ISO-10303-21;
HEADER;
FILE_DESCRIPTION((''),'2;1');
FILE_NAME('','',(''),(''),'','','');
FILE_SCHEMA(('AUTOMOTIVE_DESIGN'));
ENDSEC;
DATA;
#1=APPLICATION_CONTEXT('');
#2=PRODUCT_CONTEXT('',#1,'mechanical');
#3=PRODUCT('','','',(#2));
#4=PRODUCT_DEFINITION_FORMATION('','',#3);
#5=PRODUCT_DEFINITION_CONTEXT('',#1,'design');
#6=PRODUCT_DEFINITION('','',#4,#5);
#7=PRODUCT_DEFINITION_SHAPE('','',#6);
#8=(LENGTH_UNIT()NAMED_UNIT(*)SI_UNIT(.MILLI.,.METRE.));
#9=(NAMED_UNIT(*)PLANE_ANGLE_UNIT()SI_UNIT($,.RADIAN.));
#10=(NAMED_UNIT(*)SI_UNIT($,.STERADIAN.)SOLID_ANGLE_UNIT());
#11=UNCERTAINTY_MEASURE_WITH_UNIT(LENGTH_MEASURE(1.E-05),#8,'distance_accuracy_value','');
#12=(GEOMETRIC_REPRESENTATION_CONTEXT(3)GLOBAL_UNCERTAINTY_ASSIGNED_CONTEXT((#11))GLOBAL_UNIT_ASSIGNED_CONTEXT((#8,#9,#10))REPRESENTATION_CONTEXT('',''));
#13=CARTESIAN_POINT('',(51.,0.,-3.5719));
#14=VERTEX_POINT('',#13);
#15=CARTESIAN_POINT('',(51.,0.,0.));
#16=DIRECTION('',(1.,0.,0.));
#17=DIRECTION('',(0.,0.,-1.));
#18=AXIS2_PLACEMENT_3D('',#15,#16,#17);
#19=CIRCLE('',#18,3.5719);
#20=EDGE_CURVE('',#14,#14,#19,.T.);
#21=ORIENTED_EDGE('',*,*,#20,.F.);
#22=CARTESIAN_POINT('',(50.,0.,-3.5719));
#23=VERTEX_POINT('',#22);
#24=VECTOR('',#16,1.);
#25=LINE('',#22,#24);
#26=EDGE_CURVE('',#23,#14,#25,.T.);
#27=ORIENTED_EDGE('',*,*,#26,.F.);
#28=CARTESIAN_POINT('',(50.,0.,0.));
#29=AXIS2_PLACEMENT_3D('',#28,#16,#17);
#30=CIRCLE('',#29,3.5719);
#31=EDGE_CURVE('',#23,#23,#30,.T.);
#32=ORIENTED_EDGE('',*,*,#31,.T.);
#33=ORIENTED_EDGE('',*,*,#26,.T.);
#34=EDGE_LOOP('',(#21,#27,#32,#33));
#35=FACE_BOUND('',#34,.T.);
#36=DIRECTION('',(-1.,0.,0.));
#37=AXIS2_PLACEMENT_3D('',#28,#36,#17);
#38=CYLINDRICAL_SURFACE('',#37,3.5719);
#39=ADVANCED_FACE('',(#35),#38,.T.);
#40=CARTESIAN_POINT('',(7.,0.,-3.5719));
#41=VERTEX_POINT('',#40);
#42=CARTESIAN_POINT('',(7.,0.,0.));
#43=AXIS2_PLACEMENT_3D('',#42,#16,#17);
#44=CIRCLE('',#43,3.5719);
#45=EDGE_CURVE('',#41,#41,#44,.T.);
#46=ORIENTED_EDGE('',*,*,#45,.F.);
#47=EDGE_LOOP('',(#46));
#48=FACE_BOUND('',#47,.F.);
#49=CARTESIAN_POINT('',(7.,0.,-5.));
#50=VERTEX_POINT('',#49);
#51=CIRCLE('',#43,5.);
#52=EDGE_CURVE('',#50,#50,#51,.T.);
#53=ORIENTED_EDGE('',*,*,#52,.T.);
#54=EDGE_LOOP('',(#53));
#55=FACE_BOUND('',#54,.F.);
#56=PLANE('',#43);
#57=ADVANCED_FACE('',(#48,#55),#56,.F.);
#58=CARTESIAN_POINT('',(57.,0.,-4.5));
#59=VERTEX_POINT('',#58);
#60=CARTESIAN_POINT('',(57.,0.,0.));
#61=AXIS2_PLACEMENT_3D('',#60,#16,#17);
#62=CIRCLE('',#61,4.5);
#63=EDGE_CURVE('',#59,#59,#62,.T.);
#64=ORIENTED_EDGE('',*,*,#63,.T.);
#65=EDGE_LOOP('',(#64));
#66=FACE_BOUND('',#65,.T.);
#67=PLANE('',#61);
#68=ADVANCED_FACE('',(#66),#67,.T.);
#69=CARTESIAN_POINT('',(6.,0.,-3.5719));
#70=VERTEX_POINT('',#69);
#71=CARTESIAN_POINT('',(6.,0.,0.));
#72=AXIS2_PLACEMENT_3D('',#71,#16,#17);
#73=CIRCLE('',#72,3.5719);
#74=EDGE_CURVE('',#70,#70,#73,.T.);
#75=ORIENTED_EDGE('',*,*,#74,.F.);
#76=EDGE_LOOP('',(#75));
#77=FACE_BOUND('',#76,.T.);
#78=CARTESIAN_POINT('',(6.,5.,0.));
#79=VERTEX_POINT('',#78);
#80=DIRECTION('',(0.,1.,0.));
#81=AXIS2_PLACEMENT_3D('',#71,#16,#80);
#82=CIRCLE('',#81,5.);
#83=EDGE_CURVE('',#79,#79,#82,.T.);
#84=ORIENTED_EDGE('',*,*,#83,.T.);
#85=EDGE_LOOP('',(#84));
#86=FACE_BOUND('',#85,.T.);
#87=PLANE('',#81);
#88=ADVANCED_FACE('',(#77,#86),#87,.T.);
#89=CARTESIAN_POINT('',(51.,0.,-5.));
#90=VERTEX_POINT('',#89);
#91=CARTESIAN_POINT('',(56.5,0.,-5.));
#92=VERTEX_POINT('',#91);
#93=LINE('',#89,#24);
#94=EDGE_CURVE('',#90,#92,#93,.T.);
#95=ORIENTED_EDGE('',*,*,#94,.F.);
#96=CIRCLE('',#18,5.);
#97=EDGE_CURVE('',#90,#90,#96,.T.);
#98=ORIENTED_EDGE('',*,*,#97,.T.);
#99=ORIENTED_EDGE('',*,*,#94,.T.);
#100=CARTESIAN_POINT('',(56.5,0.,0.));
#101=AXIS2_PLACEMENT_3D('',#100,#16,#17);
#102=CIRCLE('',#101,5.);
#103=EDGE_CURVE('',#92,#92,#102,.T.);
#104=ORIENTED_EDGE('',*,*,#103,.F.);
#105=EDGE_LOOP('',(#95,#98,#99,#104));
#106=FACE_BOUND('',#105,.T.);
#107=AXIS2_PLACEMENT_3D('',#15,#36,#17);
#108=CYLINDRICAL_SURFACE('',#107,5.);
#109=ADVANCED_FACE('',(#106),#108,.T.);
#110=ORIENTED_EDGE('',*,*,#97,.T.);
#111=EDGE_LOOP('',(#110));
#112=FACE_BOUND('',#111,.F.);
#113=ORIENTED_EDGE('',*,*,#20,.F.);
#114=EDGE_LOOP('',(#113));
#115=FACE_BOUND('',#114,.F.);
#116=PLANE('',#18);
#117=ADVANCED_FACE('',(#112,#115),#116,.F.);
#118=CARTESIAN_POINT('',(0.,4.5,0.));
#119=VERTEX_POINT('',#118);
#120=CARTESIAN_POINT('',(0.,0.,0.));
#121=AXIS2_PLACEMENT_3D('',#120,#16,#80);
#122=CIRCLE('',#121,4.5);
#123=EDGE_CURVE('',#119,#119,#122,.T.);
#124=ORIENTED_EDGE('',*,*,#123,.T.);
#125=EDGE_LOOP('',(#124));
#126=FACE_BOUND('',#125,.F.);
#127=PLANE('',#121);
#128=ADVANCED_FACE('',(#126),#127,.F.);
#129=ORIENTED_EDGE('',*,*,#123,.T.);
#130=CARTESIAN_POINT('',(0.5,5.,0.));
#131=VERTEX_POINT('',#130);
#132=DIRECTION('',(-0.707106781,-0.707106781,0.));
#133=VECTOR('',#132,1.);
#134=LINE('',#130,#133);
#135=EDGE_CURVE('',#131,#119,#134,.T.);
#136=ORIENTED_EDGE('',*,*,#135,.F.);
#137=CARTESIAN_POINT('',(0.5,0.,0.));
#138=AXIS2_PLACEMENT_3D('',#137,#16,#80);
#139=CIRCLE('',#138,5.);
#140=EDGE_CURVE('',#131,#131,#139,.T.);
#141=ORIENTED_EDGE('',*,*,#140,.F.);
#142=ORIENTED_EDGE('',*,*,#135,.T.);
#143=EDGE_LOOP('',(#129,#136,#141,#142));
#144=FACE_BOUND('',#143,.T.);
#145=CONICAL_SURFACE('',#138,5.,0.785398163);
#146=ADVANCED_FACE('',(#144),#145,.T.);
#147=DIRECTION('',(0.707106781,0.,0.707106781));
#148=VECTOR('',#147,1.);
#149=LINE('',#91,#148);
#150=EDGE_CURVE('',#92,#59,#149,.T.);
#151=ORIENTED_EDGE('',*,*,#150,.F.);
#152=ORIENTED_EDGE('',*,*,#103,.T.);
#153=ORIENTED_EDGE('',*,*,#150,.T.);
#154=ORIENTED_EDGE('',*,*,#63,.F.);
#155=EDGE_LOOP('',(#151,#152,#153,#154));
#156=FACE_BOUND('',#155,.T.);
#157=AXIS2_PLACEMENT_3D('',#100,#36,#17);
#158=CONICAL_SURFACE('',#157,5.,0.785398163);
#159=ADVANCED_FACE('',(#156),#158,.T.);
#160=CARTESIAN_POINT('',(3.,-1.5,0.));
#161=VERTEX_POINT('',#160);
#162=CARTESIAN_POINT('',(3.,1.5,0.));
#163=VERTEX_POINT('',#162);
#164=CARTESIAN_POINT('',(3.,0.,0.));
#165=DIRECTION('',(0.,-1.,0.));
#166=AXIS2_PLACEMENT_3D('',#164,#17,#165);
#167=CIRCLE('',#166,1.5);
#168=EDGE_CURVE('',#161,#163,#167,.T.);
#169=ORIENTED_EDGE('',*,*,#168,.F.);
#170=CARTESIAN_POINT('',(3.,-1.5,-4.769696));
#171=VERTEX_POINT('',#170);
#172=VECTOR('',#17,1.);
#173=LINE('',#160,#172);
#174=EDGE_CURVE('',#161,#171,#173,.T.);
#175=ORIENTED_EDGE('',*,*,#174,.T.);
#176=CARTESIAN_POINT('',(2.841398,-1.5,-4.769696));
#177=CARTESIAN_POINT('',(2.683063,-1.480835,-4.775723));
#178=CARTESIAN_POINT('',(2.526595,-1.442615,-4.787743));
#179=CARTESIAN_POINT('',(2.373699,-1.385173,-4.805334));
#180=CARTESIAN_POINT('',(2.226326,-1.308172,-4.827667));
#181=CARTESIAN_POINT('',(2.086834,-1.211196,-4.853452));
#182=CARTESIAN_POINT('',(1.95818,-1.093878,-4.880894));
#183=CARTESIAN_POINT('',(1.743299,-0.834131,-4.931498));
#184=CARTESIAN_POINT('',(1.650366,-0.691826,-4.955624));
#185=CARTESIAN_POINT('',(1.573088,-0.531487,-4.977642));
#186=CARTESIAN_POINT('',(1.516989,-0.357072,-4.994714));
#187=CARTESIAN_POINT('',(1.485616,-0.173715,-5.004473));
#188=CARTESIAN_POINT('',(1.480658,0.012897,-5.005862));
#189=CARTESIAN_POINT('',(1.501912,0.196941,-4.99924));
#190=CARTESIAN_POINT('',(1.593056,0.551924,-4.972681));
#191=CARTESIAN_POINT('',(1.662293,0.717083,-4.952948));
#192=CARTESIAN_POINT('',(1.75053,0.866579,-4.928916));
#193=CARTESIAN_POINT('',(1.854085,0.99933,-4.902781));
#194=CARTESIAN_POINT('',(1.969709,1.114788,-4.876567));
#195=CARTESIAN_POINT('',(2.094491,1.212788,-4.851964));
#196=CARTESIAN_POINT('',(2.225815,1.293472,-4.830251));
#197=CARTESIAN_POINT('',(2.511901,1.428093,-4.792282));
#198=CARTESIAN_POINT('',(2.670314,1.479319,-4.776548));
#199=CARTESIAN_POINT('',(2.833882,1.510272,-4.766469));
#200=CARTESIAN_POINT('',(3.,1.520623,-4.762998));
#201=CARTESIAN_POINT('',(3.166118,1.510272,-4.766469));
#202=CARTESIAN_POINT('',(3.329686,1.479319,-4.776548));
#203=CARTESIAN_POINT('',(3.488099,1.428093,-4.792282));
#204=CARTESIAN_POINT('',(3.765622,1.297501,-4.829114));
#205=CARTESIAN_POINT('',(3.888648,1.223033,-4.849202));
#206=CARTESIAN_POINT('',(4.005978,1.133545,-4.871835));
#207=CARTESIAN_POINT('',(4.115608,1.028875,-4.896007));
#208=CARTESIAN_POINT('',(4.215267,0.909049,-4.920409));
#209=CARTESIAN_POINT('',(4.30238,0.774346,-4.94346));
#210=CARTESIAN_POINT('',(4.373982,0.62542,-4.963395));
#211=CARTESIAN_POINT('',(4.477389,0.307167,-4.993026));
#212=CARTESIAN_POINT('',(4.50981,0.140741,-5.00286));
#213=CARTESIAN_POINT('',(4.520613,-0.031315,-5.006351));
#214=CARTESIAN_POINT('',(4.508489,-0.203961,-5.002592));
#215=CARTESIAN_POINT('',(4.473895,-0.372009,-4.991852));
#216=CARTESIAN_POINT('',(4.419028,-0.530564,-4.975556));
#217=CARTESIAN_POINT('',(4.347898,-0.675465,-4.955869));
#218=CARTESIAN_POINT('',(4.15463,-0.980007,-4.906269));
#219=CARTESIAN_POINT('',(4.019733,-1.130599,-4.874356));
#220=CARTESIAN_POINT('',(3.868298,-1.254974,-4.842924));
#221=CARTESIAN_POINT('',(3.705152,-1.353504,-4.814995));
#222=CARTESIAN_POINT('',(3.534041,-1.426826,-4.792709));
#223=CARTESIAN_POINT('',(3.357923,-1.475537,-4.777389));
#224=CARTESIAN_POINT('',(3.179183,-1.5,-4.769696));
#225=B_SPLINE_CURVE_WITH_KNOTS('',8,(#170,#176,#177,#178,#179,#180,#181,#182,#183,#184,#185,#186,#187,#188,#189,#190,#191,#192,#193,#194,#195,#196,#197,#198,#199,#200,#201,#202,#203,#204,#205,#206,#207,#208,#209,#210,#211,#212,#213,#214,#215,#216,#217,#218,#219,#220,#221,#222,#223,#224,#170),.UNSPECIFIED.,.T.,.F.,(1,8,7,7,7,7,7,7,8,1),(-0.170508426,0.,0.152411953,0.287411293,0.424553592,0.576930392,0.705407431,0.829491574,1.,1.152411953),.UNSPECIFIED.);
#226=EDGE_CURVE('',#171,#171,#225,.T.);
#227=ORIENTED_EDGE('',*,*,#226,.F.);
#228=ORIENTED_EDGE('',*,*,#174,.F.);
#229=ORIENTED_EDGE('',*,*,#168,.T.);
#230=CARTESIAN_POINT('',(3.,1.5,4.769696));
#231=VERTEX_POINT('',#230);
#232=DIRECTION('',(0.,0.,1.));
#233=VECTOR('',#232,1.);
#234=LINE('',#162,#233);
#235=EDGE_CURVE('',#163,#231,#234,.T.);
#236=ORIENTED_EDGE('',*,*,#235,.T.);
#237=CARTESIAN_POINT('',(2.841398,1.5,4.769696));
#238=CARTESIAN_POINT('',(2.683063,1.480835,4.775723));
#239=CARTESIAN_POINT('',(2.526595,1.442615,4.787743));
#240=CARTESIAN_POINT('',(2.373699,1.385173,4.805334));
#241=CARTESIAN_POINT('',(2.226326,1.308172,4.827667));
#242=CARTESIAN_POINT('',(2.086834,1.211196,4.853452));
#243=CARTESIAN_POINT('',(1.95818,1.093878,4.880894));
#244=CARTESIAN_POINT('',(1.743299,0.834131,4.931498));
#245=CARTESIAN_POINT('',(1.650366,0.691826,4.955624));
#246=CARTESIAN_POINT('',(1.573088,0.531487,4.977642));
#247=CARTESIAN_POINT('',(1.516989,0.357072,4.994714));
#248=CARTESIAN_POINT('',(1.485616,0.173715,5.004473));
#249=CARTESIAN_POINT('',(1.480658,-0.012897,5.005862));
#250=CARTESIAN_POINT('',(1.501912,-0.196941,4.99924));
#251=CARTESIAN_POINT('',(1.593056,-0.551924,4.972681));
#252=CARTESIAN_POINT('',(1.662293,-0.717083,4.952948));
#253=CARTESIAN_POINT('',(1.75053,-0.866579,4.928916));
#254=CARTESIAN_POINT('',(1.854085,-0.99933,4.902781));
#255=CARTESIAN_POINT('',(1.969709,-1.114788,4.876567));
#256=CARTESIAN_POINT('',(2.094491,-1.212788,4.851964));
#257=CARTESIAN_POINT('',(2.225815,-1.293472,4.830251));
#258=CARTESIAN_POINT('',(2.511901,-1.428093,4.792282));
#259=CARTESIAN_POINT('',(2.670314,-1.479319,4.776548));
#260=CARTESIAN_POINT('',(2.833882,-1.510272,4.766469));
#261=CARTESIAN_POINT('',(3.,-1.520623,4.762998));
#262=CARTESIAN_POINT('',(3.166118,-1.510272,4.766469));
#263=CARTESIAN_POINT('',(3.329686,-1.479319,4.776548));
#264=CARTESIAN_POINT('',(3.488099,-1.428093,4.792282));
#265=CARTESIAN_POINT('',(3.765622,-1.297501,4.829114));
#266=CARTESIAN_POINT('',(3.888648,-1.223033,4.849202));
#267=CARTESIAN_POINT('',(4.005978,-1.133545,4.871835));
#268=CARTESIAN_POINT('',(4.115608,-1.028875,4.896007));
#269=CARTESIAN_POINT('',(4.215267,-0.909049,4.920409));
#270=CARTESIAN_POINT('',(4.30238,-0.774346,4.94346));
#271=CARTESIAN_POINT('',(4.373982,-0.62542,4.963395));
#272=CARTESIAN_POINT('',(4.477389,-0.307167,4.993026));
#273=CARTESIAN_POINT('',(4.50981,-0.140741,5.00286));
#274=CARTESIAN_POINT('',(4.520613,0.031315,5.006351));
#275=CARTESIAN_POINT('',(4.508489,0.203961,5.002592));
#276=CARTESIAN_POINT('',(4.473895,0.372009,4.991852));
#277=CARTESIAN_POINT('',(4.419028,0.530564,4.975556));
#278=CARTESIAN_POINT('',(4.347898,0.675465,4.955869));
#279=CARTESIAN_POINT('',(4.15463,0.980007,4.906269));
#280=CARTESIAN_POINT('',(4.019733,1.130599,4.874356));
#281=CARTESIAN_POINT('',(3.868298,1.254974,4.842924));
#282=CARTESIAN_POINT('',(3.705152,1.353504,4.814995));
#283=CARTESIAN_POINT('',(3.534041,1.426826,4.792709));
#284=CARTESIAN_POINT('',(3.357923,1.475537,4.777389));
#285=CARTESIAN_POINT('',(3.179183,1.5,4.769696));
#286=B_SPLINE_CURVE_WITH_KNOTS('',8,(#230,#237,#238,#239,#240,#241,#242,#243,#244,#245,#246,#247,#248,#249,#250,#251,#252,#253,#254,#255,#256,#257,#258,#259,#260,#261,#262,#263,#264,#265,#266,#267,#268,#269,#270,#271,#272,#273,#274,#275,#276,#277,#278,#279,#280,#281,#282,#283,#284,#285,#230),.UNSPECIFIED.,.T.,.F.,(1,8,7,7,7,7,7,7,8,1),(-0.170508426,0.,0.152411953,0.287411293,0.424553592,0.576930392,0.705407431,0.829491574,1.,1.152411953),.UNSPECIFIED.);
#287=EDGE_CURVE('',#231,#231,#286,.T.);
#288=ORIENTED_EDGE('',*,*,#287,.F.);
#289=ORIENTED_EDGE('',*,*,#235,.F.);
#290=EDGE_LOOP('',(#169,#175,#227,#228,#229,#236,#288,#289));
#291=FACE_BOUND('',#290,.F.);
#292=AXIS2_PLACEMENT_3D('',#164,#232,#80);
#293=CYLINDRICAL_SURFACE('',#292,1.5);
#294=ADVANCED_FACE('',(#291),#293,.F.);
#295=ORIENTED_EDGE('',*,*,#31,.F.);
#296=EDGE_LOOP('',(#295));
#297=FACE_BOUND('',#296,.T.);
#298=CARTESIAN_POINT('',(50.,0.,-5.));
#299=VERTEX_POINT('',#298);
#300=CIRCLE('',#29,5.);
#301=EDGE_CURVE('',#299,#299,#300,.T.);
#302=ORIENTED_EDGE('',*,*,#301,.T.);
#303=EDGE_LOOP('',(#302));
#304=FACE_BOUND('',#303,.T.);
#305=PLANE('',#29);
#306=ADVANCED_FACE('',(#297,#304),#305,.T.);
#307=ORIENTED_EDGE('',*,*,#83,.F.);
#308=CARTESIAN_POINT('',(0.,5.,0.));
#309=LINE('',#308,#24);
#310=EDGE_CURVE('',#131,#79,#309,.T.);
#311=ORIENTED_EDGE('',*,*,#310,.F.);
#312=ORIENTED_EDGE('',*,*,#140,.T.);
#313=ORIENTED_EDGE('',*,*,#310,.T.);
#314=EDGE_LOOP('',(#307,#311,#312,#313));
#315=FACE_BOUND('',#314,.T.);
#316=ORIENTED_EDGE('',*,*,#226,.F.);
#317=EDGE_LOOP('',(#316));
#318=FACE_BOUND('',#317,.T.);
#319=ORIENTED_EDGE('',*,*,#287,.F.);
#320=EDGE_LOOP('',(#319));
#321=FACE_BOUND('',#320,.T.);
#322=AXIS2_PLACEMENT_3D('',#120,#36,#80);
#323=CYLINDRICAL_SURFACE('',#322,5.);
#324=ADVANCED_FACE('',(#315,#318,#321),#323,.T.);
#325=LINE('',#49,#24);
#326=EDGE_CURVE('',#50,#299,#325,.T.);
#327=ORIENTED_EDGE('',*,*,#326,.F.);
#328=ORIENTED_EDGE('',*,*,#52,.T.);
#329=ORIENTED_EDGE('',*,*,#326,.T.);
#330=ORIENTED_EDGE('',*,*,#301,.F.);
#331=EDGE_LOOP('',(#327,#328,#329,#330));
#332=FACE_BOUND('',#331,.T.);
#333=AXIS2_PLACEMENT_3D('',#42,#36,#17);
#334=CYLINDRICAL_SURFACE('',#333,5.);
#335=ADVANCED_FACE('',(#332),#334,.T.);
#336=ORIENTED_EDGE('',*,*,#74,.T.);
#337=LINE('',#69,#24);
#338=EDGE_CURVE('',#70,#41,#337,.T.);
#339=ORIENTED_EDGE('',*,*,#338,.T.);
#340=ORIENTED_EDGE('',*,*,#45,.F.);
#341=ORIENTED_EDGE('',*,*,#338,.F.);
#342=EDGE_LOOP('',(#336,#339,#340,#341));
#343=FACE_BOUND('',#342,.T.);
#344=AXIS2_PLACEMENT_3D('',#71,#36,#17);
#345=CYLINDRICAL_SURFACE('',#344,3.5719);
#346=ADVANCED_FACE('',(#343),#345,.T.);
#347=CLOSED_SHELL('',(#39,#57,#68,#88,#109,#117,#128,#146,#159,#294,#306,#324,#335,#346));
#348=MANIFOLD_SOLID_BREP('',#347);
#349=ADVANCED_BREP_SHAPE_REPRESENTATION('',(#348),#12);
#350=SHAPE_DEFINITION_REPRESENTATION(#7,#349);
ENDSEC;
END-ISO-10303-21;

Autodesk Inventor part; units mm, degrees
ref_plane "YZ Plane" through (0, 0, 0) normal (1, 0, 0) x (0, 1, 0)
ref_plane "XZ Plane" through (0, 0, 0) normal (0, 1, 0) x (-1, 0, 0)
ref_plane "XY Plane" through (0, 0, 0) normal (0, 0, 1) x (1, 0, 0)
sketch "Esboço2" plane through (0, 0, 0) normal (1, 0, 0) x (0, 1, 0)
  circle A0 centre (0, 0) radius 5
  dimension "d0" = 10
extrude "Extrusão1" add sketch "Esboço2" along normal blind 6
sketch "Esboço3" plane through (6, 0, 0) normal (1, 0, 0) x (0, 0, -1)
  circle A0 centre (0, 0) radius 5 projected
  circle A1 centre (0, 0) radius 3.5719
  dimension "d3" = 7.1437
extrude "Extrusão2" add sketch "Esboço3" along normal blind 1 contours A1
sketch "Esboço4" plane through (7, 0, 0) normal (1, 0, 0) x (0, 0, -1)
  circle A0 centre (0, 0) radius 3.5719 projected
  circle A1 centre (0, 0) radius 5
  dimension "d6" = 10
extrude "Extrusão3" add sketch "Esboço4" along normal blind 43 contours A0 | A1
sketch "Esboço8" plane through (50, 0, 0) normal (1, 0, 0) x (0, 0, -1)
  circle A0 centre (0, 0) radius 5 projected
  circle A1 centre (0, 0) radius 3.5719
  dimension "d34" = 7.1437
extrude "Extrusão6" add sketch "Esboço8" along normal blind 1 contours A1
sketch "Esboço9" plane through (51, 0, 0) normal (1, 0, 0) x (0, 0, -1)
  circle A0 centre (0, 0) radius 3.5719 projected
  circle A1 centre (0, 0) radius 5
  dimension "d39" = 10
extrude "Extrusão7" add sketch "Esboço9" along normal blind 6 contours A0 | A1
chamfer "Chanfro2" distance 0.5 angle 45 2 edges at (57, 0, 5) (0, -5, 0)
sketch "Esboço10" plane through (0, 0, 0) normal (0, 0, 1) x (1, 0, 0)
  line L0 (0, -4.5) -> (0, 4.5) projected
  point P0 (0, 0)
  point P1 (3, 0)
  dimension "d43" = 3
hole "Furo3" at (3, 0, 0) direction (0, 0, -1) diameter 3 end through all
hole "Furo4" at (3, 0, 0) direction (0, 0, 1) diameter 3 end through all
properties part number "pino_a3" material "Aço carbono"
